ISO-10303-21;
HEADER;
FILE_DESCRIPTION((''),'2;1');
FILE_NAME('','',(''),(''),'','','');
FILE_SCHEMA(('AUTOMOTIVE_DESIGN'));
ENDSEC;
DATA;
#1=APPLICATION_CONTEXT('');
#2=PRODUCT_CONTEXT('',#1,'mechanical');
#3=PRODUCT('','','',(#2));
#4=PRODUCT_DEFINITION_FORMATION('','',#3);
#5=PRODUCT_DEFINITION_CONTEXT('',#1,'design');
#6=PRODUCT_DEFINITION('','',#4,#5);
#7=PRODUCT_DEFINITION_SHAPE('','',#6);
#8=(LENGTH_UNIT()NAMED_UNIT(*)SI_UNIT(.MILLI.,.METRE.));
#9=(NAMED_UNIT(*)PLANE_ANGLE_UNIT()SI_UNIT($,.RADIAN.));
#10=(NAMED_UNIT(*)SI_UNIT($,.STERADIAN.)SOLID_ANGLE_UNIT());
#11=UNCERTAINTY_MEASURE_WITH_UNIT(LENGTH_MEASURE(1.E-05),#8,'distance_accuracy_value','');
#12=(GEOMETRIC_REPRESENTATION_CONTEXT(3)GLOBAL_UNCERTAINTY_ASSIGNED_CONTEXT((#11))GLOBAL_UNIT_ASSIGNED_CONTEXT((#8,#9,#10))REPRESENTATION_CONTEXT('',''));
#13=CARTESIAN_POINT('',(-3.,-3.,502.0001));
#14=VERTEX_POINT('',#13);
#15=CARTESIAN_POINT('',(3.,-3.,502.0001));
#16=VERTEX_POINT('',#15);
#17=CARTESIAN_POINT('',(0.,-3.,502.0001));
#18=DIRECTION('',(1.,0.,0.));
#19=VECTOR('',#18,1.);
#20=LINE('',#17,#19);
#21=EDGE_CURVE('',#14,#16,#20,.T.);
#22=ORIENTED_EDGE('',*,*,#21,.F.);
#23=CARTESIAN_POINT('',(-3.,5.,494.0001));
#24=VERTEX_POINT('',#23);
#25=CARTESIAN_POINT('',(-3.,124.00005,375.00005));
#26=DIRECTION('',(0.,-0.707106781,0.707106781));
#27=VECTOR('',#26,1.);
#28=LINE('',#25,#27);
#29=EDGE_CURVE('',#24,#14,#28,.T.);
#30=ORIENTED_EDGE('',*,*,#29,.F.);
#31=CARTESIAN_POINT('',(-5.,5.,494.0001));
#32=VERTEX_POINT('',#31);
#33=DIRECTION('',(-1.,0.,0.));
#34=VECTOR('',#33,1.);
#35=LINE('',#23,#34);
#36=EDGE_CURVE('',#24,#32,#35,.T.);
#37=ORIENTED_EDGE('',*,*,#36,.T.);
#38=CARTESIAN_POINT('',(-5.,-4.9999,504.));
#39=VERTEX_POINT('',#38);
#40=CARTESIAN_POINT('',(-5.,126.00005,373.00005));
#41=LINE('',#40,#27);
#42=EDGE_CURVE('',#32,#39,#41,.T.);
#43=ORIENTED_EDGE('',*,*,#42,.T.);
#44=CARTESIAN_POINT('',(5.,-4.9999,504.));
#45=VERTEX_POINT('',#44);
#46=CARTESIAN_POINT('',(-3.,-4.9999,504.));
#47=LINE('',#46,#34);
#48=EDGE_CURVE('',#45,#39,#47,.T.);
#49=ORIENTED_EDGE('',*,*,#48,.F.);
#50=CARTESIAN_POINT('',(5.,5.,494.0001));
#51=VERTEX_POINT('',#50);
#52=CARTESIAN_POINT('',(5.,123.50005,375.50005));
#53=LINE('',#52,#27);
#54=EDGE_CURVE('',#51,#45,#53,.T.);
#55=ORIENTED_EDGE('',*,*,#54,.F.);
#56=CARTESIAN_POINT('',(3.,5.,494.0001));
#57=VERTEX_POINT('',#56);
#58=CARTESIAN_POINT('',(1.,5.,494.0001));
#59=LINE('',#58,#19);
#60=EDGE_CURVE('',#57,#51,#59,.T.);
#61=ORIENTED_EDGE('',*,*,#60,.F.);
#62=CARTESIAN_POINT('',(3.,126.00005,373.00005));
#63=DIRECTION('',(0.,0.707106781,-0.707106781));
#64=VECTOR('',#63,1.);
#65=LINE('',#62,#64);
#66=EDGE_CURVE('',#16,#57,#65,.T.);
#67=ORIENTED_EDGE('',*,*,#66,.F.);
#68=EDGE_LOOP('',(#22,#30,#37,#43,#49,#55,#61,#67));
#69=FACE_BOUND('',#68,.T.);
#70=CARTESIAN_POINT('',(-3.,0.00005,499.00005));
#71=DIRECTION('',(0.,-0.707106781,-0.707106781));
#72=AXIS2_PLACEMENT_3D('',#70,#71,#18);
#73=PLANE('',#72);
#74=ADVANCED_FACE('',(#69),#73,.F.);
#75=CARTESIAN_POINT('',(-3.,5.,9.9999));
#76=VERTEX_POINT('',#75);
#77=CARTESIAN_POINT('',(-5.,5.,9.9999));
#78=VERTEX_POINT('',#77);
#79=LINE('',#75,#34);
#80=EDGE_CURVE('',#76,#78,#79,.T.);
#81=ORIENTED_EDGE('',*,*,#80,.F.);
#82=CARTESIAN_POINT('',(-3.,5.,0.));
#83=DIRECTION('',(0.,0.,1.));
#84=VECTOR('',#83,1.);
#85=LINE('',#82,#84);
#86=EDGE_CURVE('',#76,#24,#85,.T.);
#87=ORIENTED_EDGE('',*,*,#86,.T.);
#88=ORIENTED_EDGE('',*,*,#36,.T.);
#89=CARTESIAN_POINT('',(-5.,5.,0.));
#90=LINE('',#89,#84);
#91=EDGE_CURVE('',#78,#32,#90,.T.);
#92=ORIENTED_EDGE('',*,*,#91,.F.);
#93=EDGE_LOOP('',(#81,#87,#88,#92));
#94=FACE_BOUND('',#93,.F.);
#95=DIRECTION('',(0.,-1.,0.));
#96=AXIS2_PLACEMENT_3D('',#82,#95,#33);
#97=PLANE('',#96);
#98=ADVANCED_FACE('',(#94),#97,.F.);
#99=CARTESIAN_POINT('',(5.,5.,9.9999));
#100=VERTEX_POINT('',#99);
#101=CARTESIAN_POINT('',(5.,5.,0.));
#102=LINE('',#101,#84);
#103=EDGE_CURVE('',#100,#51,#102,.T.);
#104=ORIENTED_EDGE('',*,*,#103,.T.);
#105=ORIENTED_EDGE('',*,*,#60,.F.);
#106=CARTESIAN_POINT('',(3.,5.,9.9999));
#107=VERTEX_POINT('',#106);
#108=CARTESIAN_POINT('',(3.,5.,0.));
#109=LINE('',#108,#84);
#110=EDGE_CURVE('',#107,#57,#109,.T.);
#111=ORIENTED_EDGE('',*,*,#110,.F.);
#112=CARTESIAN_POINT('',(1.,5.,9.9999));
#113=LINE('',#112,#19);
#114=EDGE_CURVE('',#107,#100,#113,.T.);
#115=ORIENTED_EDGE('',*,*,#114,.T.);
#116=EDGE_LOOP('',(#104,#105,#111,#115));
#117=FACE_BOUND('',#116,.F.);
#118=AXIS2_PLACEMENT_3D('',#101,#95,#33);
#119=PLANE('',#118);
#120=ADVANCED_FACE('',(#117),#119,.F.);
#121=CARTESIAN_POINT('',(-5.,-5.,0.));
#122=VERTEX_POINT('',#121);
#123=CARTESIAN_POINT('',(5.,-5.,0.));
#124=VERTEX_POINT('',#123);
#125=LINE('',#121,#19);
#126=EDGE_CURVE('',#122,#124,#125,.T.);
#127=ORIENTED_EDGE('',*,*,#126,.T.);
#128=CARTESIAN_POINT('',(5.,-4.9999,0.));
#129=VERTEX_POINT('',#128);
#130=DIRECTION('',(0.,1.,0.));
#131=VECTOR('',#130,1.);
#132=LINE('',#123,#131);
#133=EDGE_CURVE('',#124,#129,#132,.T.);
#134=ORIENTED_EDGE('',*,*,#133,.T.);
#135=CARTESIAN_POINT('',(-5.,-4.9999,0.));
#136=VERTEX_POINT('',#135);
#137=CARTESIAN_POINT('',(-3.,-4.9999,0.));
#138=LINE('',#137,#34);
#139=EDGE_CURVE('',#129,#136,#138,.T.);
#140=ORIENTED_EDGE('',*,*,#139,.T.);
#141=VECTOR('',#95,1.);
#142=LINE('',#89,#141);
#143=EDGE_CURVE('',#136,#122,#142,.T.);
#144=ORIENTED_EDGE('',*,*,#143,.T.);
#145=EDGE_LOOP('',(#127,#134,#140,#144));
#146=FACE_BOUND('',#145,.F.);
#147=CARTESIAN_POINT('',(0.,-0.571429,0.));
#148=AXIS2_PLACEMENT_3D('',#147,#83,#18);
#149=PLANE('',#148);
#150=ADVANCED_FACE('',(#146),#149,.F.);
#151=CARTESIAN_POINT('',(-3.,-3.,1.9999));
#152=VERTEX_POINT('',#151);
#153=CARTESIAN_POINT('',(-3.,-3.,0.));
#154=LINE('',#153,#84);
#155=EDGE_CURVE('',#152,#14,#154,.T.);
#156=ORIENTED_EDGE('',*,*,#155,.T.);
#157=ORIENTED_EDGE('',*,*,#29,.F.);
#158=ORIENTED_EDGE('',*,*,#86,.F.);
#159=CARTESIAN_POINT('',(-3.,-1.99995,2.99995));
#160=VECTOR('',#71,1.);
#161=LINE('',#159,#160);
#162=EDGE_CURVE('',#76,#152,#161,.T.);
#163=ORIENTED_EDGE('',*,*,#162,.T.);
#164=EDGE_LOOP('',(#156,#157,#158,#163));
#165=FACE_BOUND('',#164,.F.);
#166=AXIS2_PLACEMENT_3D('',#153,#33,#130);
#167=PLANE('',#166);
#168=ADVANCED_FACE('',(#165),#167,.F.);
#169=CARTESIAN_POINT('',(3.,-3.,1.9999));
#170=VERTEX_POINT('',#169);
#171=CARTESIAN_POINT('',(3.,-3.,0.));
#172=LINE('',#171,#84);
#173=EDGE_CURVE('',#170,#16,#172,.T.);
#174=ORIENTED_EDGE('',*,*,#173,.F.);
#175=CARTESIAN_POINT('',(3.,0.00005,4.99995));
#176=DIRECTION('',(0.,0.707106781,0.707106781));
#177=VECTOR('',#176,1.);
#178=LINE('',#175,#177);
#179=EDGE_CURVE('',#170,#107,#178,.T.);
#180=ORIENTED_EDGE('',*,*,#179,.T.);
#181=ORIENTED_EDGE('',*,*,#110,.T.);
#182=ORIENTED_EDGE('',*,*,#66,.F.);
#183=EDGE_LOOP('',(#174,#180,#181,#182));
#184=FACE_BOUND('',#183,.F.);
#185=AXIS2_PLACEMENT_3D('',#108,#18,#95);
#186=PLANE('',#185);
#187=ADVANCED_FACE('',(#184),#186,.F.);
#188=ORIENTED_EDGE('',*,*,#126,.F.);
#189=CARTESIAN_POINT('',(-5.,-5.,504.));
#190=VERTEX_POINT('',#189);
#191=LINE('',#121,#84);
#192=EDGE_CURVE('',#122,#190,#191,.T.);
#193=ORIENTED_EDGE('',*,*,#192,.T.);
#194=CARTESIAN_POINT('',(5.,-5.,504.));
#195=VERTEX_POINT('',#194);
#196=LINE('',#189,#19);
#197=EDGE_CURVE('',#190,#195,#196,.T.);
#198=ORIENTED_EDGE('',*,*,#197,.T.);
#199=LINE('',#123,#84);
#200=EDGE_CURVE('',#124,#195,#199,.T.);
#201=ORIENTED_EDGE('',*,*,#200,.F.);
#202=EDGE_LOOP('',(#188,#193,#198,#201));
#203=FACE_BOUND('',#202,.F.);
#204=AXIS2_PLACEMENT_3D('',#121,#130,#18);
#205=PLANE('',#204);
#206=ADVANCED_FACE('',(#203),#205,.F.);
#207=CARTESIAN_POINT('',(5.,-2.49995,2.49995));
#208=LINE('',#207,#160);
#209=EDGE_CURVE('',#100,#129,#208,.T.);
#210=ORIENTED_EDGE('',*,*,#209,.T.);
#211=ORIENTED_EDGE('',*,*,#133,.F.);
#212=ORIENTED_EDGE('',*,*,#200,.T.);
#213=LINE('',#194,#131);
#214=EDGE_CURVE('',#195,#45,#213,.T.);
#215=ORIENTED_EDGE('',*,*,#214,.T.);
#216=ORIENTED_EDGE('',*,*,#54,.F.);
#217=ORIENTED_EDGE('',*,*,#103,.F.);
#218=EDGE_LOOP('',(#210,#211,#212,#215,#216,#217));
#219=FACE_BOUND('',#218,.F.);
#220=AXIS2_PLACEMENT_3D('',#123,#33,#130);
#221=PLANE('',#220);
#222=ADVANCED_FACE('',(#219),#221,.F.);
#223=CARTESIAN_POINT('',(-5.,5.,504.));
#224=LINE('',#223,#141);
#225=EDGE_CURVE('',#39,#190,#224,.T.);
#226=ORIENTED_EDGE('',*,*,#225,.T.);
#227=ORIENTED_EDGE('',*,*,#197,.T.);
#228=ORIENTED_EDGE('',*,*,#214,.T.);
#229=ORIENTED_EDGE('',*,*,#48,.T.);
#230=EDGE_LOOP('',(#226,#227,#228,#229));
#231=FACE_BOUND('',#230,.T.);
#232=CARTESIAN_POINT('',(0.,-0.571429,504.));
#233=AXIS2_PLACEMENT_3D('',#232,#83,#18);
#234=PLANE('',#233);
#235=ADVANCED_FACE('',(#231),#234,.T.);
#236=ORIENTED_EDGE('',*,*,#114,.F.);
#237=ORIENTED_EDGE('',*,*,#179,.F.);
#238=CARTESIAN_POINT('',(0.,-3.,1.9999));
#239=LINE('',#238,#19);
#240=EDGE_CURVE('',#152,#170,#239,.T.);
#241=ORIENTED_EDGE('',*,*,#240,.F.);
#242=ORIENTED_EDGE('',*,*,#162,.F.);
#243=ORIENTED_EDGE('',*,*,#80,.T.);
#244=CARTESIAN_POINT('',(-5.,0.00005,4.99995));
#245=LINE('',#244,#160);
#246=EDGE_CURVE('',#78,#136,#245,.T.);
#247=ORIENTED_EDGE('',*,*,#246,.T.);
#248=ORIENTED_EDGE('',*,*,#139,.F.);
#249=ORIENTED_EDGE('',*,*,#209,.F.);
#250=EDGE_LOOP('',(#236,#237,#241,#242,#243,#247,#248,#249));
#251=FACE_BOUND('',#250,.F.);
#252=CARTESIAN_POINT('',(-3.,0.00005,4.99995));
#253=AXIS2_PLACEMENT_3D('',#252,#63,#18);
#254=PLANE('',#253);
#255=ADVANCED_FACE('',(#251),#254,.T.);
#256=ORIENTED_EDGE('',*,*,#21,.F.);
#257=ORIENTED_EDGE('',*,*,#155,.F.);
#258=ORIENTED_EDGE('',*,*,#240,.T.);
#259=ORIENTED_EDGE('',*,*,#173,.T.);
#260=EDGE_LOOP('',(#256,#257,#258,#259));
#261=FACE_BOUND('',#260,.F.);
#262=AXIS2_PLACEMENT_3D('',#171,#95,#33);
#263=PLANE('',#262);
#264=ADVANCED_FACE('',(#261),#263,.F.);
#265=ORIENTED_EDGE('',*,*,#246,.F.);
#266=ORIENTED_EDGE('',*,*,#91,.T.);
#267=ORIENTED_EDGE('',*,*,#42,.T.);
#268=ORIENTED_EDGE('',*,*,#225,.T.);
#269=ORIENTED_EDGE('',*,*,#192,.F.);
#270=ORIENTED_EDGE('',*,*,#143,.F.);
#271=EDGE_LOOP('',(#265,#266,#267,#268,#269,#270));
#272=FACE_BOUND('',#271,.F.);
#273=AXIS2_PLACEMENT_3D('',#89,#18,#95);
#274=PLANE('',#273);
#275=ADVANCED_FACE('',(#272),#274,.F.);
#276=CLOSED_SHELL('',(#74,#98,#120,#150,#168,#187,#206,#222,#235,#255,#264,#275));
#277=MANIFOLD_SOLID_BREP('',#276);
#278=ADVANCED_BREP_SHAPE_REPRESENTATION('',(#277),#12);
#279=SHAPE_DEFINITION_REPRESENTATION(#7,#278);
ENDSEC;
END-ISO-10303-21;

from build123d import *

# Parameters (mm, degrees)
F1_DEPTH   = 504
F2_C1_SIZE = 9.9999
F2_C2_SIZE = 9.9999


# Not quite as in the source:
# - a fillet or chamfer is up to 0.001 mm smaller than in the source, because OpenCascade refuses the exact size


with BuildPart() as f1:
    # F0 (on Top) → F1 (new body)
    with BuildSketch(Plane.XY):
        Polygon((-3, 5), (-5, 5), (-5, -5), (5, -5), (5, 5), (3, 5), (3, -3), (-3, -3), align=None)
    extrude(amount=F1_DEPTH)

    # F2: chamfer of 10 on 4 edges, made by hand

    # F2_c1 (size 10 in the source; OpenCascade refuses exactly that, so slightly less here)
    f2_c1_edges = [f1.edges().sort_by_distance(p)[0] for p in [
        (-4, 5, 0),
    ]]
    chamfer(f2_c1_edges, length=F2_C1_SIZE)

    # F2_c2 (size 10 in the source; OpenCascade refuses exactly that, so slightly less here)
    f2_c2_edges = [f1.edges().sort_by_distance(p)[0] for p in [
        (-4, 5, 504),
    ]]
    chamfer(f2_c2_edges, length=F2_C2_SIZE)


solid = f1.part
